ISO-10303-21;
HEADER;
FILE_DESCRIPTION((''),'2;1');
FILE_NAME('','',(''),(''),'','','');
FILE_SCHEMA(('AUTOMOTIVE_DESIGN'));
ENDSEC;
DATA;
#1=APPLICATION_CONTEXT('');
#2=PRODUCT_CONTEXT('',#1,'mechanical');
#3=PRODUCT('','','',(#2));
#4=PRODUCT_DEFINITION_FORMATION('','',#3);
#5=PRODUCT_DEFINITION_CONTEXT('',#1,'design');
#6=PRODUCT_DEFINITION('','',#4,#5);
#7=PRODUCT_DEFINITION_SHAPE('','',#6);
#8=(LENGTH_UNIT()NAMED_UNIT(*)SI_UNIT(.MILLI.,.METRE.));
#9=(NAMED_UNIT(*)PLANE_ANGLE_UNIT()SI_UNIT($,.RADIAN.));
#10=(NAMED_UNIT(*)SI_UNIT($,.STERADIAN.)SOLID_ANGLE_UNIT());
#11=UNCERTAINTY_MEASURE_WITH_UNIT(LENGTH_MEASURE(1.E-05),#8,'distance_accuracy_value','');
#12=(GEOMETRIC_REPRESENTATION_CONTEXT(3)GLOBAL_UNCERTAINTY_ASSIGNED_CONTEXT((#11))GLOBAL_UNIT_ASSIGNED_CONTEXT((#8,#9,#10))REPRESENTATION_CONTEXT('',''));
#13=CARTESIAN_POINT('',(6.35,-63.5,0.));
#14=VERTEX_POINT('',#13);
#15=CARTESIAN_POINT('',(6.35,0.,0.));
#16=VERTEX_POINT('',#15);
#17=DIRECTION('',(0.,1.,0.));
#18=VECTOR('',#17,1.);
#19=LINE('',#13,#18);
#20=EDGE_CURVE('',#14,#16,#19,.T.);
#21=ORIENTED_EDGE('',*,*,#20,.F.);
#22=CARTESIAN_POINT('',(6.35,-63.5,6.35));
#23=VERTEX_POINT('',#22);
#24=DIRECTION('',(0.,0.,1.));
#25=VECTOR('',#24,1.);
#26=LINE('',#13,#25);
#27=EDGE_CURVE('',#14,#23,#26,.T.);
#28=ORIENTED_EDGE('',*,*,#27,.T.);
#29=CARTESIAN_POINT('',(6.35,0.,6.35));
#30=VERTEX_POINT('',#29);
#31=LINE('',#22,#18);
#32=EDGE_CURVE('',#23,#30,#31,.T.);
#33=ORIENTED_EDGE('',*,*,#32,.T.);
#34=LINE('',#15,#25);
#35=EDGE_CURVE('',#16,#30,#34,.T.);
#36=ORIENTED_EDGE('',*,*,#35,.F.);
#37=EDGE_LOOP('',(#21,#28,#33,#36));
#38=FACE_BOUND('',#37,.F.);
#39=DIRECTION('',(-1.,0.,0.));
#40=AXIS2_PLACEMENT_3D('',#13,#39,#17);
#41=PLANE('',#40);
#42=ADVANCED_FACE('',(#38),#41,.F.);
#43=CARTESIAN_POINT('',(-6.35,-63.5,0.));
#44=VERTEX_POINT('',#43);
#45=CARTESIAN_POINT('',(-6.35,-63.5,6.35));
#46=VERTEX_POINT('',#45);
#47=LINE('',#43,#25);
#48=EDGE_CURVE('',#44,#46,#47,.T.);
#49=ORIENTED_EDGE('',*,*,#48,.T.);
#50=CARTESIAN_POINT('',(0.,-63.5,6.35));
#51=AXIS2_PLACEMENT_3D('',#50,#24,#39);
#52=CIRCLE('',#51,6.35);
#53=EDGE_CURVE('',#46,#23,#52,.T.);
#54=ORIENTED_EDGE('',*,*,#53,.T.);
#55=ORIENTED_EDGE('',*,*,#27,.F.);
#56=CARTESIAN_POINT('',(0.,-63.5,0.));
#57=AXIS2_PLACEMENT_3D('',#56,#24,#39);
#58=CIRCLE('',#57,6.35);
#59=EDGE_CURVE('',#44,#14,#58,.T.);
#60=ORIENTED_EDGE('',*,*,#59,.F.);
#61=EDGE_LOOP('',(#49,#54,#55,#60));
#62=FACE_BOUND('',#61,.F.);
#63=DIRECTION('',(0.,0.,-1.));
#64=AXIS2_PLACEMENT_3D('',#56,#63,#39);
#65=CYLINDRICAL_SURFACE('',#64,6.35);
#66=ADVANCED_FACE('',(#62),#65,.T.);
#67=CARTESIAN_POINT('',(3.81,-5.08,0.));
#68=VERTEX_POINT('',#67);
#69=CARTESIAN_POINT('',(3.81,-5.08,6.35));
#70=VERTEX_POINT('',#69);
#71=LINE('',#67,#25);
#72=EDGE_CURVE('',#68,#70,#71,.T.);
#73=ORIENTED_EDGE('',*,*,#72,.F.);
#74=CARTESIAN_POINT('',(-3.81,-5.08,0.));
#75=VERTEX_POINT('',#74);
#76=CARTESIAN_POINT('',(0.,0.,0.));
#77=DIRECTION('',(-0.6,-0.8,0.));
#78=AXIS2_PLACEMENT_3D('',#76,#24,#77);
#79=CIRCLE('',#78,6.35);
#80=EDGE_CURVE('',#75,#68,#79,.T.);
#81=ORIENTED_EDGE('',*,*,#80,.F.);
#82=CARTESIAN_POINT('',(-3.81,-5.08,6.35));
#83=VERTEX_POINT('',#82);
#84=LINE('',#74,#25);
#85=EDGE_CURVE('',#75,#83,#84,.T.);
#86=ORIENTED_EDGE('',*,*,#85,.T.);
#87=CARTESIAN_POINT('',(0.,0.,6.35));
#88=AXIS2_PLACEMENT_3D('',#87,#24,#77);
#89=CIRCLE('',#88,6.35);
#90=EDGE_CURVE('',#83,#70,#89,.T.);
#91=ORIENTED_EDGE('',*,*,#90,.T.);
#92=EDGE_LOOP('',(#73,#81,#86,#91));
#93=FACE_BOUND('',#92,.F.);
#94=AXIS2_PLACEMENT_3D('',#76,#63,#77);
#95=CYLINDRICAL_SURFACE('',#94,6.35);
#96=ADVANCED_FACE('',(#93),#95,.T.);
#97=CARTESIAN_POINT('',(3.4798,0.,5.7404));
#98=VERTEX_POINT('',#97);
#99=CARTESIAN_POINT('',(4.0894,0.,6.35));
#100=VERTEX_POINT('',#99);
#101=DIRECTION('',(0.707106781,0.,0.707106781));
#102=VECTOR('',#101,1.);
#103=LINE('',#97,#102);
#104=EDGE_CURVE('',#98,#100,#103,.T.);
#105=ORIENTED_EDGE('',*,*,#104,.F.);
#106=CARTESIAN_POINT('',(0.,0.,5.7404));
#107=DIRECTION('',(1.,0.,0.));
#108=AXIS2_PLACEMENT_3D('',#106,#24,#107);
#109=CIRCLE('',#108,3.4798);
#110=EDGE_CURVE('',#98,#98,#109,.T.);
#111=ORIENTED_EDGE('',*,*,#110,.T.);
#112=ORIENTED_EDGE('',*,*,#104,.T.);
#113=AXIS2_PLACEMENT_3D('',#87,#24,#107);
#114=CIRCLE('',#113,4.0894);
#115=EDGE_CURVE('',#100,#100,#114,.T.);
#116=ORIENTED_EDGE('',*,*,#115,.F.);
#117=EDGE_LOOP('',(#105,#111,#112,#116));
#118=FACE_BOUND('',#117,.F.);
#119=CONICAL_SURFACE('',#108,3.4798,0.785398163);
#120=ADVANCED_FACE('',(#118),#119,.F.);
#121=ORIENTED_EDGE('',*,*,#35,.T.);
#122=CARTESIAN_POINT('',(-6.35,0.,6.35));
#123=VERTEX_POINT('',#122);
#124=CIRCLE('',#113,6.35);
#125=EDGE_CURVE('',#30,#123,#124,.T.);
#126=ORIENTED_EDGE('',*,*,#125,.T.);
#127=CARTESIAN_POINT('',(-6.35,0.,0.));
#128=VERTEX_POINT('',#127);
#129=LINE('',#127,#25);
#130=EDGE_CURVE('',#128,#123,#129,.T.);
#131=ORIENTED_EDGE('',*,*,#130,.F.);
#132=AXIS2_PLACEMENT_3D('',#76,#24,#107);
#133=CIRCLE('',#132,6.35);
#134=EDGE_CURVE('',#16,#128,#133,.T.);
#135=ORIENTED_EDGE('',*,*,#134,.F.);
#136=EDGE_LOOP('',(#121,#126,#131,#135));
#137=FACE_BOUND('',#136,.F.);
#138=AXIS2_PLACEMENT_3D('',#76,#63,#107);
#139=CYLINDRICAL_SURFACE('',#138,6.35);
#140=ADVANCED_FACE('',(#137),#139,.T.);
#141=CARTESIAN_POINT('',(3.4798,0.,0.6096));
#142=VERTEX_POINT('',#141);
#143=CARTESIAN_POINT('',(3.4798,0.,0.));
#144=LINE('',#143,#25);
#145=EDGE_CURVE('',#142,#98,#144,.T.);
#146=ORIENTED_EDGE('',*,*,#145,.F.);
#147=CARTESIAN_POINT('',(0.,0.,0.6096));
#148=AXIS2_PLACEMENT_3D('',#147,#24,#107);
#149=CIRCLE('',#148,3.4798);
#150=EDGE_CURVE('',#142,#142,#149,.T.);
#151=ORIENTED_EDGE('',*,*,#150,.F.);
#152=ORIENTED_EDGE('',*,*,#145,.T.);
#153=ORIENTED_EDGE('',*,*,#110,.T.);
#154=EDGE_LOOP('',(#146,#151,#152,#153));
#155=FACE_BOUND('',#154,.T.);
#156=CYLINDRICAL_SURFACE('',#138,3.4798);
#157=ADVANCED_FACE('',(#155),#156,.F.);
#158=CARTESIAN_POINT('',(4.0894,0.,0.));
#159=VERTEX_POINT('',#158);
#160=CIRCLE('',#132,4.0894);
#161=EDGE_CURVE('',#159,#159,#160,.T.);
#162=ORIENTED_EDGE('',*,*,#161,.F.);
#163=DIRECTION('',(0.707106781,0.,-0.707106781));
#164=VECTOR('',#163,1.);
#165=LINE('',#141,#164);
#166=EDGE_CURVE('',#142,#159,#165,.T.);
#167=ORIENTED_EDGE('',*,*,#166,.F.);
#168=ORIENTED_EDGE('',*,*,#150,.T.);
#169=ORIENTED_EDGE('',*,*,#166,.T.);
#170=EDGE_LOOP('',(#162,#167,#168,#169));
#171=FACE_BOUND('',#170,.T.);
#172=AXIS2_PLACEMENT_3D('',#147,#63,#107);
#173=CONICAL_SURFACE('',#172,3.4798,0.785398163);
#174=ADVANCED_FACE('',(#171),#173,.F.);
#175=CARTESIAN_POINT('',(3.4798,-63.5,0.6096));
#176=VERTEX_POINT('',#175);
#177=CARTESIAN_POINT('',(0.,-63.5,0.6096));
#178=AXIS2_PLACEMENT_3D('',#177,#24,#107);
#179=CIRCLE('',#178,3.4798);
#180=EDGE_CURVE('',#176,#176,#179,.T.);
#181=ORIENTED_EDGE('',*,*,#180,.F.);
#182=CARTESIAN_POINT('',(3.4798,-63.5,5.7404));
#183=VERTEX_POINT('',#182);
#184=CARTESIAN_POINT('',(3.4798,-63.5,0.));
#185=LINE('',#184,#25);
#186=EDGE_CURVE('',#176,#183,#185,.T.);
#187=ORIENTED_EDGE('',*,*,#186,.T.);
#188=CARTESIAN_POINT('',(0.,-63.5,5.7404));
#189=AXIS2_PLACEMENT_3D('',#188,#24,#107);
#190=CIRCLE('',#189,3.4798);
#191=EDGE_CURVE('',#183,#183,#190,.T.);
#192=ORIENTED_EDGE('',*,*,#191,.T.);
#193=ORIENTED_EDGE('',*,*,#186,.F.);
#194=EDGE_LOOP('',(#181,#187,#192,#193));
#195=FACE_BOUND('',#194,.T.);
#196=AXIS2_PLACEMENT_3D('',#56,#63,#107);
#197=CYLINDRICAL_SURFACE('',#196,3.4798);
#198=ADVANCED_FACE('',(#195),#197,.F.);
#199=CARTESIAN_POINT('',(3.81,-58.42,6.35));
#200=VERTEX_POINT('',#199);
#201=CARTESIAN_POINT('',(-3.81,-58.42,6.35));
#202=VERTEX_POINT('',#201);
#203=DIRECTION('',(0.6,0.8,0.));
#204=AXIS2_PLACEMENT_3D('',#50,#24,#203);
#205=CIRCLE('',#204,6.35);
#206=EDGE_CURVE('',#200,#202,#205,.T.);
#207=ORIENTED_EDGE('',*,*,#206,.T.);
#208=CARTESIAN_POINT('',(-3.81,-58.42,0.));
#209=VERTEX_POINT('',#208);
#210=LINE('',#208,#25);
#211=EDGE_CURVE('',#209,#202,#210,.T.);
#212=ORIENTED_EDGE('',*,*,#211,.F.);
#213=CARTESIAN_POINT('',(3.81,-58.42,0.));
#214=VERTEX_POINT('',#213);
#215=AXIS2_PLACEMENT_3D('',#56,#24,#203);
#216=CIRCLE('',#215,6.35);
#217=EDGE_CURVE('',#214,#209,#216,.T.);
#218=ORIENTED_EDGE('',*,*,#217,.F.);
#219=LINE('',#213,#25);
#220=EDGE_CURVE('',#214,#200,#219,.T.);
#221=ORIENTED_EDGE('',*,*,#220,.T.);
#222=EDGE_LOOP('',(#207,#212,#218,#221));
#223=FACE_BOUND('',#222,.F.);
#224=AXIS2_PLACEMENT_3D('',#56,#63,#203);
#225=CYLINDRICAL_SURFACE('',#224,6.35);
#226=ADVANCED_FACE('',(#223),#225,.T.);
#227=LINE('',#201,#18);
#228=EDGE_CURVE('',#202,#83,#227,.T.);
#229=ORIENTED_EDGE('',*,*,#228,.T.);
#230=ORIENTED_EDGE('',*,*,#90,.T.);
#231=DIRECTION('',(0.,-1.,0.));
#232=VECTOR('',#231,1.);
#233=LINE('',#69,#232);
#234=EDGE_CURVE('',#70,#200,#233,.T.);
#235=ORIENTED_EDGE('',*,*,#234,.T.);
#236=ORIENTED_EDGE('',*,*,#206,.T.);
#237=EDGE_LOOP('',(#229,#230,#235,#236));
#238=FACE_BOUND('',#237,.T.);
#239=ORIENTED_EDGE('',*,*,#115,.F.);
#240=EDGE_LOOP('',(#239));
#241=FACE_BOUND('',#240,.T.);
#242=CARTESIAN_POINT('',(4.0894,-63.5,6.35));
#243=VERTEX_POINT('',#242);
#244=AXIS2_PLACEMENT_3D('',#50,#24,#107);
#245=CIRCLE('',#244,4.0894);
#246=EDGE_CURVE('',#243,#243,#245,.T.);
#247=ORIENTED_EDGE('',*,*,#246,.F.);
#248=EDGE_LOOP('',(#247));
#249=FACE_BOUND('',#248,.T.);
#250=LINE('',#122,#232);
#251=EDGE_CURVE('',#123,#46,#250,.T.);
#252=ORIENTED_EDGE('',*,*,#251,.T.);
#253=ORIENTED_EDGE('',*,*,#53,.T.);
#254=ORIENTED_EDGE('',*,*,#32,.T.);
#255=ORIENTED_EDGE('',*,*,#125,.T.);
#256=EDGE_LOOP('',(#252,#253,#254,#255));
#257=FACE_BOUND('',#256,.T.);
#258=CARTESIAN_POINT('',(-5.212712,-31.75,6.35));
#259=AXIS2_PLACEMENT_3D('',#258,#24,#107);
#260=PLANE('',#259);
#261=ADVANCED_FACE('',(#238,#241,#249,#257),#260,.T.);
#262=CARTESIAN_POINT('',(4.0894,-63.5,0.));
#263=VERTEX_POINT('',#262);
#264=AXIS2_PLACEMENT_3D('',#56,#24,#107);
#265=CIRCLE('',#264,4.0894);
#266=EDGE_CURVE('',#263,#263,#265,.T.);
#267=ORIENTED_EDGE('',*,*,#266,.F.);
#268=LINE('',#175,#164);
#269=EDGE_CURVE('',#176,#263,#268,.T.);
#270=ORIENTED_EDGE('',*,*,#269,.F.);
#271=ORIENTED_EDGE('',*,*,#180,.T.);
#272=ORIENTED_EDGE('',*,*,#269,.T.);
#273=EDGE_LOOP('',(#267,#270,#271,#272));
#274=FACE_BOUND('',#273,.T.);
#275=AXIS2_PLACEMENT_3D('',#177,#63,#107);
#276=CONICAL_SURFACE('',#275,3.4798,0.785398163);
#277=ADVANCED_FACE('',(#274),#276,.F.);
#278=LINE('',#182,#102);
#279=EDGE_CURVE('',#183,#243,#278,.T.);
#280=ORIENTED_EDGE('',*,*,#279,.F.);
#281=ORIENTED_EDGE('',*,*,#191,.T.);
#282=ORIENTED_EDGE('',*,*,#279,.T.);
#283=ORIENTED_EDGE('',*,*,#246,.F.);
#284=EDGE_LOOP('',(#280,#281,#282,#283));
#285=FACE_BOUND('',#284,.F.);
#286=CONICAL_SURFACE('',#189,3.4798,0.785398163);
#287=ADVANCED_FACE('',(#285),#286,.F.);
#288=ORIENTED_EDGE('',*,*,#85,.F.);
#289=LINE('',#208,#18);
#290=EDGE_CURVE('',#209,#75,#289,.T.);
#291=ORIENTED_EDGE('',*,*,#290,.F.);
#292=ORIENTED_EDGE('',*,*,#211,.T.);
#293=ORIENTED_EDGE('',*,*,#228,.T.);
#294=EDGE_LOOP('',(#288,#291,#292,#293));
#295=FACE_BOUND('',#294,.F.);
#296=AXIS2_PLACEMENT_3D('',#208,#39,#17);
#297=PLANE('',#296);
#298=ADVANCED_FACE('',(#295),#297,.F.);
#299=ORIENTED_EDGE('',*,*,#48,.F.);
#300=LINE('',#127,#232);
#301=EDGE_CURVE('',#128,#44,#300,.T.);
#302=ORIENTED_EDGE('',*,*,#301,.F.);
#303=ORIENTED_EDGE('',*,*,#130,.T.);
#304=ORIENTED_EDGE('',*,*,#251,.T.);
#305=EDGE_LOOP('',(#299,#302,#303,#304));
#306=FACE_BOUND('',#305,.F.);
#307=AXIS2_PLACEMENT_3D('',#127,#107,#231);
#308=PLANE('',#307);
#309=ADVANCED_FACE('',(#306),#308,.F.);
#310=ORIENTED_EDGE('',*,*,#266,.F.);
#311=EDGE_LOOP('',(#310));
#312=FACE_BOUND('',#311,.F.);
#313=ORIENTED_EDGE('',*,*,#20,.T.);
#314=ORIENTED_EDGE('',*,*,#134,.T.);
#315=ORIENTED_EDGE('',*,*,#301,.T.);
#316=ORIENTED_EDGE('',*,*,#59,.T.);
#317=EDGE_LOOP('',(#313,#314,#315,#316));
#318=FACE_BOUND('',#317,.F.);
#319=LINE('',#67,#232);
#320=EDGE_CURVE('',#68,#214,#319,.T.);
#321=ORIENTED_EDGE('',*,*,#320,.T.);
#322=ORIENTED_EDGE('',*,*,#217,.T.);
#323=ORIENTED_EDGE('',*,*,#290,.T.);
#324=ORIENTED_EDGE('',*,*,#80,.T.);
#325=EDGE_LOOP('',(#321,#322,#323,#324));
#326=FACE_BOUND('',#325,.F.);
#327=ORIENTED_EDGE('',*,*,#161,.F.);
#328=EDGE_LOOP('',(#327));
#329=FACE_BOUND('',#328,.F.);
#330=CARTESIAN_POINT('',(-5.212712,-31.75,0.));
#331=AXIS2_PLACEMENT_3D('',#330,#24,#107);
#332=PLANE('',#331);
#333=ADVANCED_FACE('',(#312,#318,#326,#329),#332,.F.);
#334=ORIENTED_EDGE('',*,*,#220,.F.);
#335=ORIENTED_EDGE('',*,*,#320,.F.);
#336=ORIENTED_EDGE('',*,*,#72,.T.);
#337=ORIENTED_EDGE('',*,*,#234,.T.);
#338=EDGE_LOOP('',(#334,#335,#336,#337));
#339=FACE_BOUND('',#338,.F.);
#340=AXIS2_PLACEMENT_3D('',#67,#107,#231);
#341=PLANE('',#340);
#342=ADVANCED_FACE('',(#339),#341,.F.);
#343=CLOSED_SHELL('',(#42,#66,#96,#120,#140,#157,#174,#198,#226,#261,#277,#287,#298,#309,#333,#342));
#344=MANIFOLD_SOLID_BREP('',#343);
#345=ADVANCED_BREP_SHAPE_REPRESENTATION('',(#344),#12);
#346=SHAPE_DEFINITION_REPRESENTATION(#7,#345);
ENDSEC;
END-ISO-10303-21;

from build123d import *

# Parameters (mm, degrees)
F2_R     = 3.4798
F3_DEPTH = 6.35
F4_SIZE2 = 0.6096
F4_SIZE  = 0.6096


# Not quite as in the source:
# - a variable given as a bare number and used for a length is read in inches; the dataset says mm whatever the document's units were


with BuildPart() as f3:
    # F2 (on Top) → F3 (new body)
    with BuildSketch(Plane.XY):
        with BuildLine():
            ThreePointArc((-3.81, -5.08), (-5.6796126628, -2.8398063314), (-6.35, 0))
            Line((-6.35, 0), (-6.35, -63.5))
            ThreePointArc((-6.35, -63.5), (-5.6796126628, -60.6601936686), (-3.81, -58.42))
            Line((-3.81, -58.42), (-3.81, -5.08))
        make_face()
        with BuildLine():
            ThreePointArc((3.81, -5.08), (5.6796126628, -2.8398063314), (6.35, 0))
            ThreePointArc((6.35, 0), (0, 6.35), (-6.35, 0))
            ThreePointArc((-6.35, 0), (-5.6796126628, -2.8398063314), (-3.81, -5.08))
            ThreePointArc((-3.81, -5.08), (0, -6.35), (3.81, -5.08))
        make_face()
        Circle(F2_R, mode=Mode.SUBTRACT)
        with BuildLine():
            Line((6.35, -63.5), (6.35, 0))
            ThreePointArc((6.35, 0), (5.6796126628, -2.8398063314), (3.81, -5.08))
            Line((3.81, -5.08), (3.81, -58.42))
            ThreePointArc((3.81, -58.42), (5.6796126628, -60.6601936686), (6.35, -63.5))
        make_face()
        with BuildLine():
            ThreePointArc((-6.35, -63.5), (0, -69.85), (6.35, -63.5))
            ThreePointArc((6.35, -63.5), (5.6796126628, -60.6601936686), (3.81, -58.42))
            ThreePointArc((3.81, -58.42), (0, -57.15), (-3.81, -58.42))
            ThreePointArc((-3.81, -58.42), (-5.6796126628, -60.6601936686), (-6.35, -63.5))
        make_face()
        with Locations((0, -63.5)):
            Circle(F2_R, mode=Mode.SUBTRACT)
    extrude(amount=F3_DEPTH)

    # F4
    f4_edges = [f3.edges().sort_by_distance(p)[0] for p in [
        (-3.4798, 0, 6.35),
        (-3.4798, -63.5, 6.35),
        (-3.4798, 0, 0),
        (-3.4798, -63.5, 0),
    ]]
    chamfer(f4_edges, length=F4_SIZE, length2=F4_SIZE2)


solid = f3.part
